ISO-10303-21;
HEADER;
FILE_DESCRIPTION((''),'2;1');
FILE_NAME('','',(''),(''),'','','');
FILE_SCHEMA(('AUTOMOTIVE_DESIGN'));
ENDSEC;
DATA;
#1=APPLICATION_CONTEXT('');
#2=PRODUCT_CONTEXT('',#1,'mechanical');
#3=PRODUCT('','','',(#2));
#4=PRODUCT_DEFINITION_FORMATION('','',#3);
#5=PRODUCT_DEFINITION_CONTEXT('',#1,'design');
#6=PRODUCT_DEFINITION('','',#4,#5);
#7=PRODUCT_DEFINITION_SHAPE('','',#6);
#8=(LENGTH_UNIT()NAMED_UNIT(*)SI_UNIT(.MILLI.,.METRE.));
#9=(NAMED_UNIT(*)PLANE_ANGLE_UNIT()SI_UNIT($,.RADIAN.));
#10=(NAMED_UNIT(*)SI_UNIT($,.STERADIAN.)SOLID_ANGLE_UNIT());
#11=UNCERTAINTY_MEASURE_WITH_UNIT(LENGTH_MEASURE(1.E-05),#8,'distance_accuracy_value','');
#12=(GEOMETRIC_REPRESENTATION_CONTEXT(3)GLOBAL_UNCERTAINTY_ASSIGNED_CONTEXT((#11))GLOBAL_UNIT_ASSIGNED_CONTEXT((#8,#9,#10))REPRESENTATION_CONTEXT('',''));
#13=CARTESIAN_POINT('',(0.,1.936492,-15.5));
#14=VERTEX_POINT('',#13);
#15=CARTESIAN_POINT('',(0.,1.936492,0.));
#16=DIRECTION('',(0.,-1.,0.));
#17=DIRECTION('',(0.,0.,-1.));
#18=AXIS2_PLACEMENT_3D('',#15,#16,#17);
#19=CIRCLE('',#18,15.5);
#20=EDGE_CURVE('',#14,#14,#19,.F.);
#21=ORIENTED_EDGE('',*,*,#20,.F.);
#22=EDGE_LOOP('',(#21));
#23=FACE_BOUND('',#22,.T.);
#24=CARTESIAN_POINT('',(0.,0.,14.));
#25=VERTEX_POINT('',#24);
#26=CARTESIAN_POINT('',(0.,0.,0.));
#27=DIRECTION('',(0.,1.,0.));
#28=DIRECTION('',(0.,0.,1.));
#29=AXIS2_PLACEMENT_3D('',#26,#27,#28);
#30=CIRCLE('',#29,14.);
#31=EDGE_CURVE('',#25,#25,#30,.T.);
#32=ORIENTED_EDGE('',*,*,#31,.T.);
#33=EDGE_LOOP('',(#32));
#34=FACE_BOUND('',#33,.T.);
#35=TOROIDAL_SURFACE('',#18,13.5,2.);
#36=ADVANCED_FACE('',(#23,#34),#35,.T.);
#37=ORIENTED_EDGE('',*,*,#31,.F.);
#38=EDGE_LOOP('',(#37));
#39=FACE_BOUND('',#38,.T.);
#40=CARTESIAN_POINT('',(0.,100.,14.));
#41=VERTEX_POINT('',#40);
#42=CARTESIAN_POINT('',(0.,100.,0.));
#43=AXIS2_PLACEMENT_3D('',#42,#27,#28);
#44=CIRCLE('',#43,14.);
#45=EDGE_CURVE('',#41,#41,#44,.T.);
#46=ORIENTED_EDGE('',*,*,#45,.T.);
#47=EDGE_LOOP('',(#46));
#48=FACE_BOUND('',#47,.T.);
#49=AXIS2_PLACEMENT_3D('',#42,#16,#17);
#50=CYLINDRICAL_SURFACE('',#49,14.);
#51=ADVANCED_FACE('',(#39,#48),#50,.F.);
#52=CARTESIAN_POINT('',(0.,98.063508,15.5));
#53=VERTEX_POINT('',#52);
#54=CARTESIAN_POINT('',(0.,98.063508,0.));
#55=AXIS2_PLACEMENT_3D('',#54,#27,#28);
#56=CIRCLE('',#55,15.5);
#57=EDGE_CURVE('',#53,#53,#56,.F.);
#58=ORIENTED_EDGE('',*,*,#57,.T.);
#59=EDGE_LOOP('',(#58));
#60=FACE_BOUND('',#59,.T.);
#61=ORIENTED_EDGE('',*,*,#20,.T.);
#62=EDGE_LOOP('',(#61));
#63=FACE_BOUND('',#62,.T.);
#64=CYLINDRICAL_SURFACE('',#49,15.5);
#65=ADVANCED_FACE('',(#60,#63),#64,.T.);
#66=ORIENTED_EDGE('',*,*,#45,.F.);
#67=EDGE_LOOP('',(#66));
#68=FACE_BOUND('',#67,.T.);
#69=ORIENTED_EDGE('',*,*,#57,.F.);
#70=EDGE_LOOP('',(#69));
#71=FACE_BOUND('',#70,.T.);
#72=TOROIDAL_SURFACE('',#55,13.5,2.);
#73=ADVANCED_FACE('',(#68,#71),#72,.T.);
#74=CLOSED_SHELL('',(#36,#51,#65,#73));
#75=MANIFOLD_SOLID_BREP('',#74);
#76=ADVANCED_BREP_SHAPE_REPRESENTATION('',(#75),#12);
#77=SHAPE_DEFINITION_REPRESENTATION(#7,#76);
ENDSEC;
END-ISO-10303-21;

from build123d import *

# Parameters (mm, degrees)
SKETCH_1_R      = 15.5
SKETCH_1_R_2    = 14
EXTRUDE_1_DEPTH = 100
FILLET_1_R      = 2


with BuildPart() as part:
    # 草图1 → 凸台-拉伸1 (new body)
    with BuildSketch(Plane(origin=(0, 0, 0), x_dir=(1, 0, 0), z_dir=(0, 1, 0))):
        with Locations(Location((0, 0, 0), (0, 0, 270))):
            Circle(SKETCH_1_R)
        with Locations(Location((0, 0, 0), (0, 0, 270))):
            Circle(SKETCH_1_R_2, mode=Mode.SUBTRACT)
    extrude(amount=EXTRUDE_1_DEPTH)

    # 圆角1
    # the kernel refuses this fillet: 2 mm, written as the material it takes off along each edge
    with BuildSketch(Plane(origin=(0, 0, 0), x_dir=(0, 0, 1), z_dir=(-1, 0, 0))) as fillet_1_piece_1:
        with BuildLine():
            CenterArc((13.5, 1.936491673), FILLET_1_R, 284.477512186, 75.522487814)
            Line((14, 0), (14.01, -0.038729833))
            ThreePointArc((14.01, -0.038729833), (14.75, -0.04), (15.5, -0.04))
            Line((15.5, -0.04), (15.54, 0))
            Line((15.54, 0), (15.54, 1.936491673))
            Line((15.54, 1.936491673), (15.5, 1.936491673))
        make_face()
    revolve(axis=Axis((0, 0, 0), (0, 1, 0)), mode=Mode.SUBTRACT)
    with BuildSketch(Plane(origin=(0, 100, 0), x_dir=(0, 0, 1), z_dir=(-1, 0, 0))) as fillet_1_piece_2:
        with BuildLine():
            CenterArc((13.5, -1.936491673), FILLET_1_R, 0, 75.522487814)
            Line((14, 0), (14.01, 0.038729833))
            ThreePointArc((14.01, 0.038729833), (14.75, 0.04), (15.5, 0.04))
            Line((15.5, 0.04), (15.54, 0))
            Line((15.54, 0), (15.54, -1.936491673))
            Line((15.54, -1.936491673), (15.5, -1.936491673))
        make_face()
    revolve(axis=Axis((0, 100, 0), (0, 1, 0)), mode=Mode.SUBTRACT)


solid = part.part
